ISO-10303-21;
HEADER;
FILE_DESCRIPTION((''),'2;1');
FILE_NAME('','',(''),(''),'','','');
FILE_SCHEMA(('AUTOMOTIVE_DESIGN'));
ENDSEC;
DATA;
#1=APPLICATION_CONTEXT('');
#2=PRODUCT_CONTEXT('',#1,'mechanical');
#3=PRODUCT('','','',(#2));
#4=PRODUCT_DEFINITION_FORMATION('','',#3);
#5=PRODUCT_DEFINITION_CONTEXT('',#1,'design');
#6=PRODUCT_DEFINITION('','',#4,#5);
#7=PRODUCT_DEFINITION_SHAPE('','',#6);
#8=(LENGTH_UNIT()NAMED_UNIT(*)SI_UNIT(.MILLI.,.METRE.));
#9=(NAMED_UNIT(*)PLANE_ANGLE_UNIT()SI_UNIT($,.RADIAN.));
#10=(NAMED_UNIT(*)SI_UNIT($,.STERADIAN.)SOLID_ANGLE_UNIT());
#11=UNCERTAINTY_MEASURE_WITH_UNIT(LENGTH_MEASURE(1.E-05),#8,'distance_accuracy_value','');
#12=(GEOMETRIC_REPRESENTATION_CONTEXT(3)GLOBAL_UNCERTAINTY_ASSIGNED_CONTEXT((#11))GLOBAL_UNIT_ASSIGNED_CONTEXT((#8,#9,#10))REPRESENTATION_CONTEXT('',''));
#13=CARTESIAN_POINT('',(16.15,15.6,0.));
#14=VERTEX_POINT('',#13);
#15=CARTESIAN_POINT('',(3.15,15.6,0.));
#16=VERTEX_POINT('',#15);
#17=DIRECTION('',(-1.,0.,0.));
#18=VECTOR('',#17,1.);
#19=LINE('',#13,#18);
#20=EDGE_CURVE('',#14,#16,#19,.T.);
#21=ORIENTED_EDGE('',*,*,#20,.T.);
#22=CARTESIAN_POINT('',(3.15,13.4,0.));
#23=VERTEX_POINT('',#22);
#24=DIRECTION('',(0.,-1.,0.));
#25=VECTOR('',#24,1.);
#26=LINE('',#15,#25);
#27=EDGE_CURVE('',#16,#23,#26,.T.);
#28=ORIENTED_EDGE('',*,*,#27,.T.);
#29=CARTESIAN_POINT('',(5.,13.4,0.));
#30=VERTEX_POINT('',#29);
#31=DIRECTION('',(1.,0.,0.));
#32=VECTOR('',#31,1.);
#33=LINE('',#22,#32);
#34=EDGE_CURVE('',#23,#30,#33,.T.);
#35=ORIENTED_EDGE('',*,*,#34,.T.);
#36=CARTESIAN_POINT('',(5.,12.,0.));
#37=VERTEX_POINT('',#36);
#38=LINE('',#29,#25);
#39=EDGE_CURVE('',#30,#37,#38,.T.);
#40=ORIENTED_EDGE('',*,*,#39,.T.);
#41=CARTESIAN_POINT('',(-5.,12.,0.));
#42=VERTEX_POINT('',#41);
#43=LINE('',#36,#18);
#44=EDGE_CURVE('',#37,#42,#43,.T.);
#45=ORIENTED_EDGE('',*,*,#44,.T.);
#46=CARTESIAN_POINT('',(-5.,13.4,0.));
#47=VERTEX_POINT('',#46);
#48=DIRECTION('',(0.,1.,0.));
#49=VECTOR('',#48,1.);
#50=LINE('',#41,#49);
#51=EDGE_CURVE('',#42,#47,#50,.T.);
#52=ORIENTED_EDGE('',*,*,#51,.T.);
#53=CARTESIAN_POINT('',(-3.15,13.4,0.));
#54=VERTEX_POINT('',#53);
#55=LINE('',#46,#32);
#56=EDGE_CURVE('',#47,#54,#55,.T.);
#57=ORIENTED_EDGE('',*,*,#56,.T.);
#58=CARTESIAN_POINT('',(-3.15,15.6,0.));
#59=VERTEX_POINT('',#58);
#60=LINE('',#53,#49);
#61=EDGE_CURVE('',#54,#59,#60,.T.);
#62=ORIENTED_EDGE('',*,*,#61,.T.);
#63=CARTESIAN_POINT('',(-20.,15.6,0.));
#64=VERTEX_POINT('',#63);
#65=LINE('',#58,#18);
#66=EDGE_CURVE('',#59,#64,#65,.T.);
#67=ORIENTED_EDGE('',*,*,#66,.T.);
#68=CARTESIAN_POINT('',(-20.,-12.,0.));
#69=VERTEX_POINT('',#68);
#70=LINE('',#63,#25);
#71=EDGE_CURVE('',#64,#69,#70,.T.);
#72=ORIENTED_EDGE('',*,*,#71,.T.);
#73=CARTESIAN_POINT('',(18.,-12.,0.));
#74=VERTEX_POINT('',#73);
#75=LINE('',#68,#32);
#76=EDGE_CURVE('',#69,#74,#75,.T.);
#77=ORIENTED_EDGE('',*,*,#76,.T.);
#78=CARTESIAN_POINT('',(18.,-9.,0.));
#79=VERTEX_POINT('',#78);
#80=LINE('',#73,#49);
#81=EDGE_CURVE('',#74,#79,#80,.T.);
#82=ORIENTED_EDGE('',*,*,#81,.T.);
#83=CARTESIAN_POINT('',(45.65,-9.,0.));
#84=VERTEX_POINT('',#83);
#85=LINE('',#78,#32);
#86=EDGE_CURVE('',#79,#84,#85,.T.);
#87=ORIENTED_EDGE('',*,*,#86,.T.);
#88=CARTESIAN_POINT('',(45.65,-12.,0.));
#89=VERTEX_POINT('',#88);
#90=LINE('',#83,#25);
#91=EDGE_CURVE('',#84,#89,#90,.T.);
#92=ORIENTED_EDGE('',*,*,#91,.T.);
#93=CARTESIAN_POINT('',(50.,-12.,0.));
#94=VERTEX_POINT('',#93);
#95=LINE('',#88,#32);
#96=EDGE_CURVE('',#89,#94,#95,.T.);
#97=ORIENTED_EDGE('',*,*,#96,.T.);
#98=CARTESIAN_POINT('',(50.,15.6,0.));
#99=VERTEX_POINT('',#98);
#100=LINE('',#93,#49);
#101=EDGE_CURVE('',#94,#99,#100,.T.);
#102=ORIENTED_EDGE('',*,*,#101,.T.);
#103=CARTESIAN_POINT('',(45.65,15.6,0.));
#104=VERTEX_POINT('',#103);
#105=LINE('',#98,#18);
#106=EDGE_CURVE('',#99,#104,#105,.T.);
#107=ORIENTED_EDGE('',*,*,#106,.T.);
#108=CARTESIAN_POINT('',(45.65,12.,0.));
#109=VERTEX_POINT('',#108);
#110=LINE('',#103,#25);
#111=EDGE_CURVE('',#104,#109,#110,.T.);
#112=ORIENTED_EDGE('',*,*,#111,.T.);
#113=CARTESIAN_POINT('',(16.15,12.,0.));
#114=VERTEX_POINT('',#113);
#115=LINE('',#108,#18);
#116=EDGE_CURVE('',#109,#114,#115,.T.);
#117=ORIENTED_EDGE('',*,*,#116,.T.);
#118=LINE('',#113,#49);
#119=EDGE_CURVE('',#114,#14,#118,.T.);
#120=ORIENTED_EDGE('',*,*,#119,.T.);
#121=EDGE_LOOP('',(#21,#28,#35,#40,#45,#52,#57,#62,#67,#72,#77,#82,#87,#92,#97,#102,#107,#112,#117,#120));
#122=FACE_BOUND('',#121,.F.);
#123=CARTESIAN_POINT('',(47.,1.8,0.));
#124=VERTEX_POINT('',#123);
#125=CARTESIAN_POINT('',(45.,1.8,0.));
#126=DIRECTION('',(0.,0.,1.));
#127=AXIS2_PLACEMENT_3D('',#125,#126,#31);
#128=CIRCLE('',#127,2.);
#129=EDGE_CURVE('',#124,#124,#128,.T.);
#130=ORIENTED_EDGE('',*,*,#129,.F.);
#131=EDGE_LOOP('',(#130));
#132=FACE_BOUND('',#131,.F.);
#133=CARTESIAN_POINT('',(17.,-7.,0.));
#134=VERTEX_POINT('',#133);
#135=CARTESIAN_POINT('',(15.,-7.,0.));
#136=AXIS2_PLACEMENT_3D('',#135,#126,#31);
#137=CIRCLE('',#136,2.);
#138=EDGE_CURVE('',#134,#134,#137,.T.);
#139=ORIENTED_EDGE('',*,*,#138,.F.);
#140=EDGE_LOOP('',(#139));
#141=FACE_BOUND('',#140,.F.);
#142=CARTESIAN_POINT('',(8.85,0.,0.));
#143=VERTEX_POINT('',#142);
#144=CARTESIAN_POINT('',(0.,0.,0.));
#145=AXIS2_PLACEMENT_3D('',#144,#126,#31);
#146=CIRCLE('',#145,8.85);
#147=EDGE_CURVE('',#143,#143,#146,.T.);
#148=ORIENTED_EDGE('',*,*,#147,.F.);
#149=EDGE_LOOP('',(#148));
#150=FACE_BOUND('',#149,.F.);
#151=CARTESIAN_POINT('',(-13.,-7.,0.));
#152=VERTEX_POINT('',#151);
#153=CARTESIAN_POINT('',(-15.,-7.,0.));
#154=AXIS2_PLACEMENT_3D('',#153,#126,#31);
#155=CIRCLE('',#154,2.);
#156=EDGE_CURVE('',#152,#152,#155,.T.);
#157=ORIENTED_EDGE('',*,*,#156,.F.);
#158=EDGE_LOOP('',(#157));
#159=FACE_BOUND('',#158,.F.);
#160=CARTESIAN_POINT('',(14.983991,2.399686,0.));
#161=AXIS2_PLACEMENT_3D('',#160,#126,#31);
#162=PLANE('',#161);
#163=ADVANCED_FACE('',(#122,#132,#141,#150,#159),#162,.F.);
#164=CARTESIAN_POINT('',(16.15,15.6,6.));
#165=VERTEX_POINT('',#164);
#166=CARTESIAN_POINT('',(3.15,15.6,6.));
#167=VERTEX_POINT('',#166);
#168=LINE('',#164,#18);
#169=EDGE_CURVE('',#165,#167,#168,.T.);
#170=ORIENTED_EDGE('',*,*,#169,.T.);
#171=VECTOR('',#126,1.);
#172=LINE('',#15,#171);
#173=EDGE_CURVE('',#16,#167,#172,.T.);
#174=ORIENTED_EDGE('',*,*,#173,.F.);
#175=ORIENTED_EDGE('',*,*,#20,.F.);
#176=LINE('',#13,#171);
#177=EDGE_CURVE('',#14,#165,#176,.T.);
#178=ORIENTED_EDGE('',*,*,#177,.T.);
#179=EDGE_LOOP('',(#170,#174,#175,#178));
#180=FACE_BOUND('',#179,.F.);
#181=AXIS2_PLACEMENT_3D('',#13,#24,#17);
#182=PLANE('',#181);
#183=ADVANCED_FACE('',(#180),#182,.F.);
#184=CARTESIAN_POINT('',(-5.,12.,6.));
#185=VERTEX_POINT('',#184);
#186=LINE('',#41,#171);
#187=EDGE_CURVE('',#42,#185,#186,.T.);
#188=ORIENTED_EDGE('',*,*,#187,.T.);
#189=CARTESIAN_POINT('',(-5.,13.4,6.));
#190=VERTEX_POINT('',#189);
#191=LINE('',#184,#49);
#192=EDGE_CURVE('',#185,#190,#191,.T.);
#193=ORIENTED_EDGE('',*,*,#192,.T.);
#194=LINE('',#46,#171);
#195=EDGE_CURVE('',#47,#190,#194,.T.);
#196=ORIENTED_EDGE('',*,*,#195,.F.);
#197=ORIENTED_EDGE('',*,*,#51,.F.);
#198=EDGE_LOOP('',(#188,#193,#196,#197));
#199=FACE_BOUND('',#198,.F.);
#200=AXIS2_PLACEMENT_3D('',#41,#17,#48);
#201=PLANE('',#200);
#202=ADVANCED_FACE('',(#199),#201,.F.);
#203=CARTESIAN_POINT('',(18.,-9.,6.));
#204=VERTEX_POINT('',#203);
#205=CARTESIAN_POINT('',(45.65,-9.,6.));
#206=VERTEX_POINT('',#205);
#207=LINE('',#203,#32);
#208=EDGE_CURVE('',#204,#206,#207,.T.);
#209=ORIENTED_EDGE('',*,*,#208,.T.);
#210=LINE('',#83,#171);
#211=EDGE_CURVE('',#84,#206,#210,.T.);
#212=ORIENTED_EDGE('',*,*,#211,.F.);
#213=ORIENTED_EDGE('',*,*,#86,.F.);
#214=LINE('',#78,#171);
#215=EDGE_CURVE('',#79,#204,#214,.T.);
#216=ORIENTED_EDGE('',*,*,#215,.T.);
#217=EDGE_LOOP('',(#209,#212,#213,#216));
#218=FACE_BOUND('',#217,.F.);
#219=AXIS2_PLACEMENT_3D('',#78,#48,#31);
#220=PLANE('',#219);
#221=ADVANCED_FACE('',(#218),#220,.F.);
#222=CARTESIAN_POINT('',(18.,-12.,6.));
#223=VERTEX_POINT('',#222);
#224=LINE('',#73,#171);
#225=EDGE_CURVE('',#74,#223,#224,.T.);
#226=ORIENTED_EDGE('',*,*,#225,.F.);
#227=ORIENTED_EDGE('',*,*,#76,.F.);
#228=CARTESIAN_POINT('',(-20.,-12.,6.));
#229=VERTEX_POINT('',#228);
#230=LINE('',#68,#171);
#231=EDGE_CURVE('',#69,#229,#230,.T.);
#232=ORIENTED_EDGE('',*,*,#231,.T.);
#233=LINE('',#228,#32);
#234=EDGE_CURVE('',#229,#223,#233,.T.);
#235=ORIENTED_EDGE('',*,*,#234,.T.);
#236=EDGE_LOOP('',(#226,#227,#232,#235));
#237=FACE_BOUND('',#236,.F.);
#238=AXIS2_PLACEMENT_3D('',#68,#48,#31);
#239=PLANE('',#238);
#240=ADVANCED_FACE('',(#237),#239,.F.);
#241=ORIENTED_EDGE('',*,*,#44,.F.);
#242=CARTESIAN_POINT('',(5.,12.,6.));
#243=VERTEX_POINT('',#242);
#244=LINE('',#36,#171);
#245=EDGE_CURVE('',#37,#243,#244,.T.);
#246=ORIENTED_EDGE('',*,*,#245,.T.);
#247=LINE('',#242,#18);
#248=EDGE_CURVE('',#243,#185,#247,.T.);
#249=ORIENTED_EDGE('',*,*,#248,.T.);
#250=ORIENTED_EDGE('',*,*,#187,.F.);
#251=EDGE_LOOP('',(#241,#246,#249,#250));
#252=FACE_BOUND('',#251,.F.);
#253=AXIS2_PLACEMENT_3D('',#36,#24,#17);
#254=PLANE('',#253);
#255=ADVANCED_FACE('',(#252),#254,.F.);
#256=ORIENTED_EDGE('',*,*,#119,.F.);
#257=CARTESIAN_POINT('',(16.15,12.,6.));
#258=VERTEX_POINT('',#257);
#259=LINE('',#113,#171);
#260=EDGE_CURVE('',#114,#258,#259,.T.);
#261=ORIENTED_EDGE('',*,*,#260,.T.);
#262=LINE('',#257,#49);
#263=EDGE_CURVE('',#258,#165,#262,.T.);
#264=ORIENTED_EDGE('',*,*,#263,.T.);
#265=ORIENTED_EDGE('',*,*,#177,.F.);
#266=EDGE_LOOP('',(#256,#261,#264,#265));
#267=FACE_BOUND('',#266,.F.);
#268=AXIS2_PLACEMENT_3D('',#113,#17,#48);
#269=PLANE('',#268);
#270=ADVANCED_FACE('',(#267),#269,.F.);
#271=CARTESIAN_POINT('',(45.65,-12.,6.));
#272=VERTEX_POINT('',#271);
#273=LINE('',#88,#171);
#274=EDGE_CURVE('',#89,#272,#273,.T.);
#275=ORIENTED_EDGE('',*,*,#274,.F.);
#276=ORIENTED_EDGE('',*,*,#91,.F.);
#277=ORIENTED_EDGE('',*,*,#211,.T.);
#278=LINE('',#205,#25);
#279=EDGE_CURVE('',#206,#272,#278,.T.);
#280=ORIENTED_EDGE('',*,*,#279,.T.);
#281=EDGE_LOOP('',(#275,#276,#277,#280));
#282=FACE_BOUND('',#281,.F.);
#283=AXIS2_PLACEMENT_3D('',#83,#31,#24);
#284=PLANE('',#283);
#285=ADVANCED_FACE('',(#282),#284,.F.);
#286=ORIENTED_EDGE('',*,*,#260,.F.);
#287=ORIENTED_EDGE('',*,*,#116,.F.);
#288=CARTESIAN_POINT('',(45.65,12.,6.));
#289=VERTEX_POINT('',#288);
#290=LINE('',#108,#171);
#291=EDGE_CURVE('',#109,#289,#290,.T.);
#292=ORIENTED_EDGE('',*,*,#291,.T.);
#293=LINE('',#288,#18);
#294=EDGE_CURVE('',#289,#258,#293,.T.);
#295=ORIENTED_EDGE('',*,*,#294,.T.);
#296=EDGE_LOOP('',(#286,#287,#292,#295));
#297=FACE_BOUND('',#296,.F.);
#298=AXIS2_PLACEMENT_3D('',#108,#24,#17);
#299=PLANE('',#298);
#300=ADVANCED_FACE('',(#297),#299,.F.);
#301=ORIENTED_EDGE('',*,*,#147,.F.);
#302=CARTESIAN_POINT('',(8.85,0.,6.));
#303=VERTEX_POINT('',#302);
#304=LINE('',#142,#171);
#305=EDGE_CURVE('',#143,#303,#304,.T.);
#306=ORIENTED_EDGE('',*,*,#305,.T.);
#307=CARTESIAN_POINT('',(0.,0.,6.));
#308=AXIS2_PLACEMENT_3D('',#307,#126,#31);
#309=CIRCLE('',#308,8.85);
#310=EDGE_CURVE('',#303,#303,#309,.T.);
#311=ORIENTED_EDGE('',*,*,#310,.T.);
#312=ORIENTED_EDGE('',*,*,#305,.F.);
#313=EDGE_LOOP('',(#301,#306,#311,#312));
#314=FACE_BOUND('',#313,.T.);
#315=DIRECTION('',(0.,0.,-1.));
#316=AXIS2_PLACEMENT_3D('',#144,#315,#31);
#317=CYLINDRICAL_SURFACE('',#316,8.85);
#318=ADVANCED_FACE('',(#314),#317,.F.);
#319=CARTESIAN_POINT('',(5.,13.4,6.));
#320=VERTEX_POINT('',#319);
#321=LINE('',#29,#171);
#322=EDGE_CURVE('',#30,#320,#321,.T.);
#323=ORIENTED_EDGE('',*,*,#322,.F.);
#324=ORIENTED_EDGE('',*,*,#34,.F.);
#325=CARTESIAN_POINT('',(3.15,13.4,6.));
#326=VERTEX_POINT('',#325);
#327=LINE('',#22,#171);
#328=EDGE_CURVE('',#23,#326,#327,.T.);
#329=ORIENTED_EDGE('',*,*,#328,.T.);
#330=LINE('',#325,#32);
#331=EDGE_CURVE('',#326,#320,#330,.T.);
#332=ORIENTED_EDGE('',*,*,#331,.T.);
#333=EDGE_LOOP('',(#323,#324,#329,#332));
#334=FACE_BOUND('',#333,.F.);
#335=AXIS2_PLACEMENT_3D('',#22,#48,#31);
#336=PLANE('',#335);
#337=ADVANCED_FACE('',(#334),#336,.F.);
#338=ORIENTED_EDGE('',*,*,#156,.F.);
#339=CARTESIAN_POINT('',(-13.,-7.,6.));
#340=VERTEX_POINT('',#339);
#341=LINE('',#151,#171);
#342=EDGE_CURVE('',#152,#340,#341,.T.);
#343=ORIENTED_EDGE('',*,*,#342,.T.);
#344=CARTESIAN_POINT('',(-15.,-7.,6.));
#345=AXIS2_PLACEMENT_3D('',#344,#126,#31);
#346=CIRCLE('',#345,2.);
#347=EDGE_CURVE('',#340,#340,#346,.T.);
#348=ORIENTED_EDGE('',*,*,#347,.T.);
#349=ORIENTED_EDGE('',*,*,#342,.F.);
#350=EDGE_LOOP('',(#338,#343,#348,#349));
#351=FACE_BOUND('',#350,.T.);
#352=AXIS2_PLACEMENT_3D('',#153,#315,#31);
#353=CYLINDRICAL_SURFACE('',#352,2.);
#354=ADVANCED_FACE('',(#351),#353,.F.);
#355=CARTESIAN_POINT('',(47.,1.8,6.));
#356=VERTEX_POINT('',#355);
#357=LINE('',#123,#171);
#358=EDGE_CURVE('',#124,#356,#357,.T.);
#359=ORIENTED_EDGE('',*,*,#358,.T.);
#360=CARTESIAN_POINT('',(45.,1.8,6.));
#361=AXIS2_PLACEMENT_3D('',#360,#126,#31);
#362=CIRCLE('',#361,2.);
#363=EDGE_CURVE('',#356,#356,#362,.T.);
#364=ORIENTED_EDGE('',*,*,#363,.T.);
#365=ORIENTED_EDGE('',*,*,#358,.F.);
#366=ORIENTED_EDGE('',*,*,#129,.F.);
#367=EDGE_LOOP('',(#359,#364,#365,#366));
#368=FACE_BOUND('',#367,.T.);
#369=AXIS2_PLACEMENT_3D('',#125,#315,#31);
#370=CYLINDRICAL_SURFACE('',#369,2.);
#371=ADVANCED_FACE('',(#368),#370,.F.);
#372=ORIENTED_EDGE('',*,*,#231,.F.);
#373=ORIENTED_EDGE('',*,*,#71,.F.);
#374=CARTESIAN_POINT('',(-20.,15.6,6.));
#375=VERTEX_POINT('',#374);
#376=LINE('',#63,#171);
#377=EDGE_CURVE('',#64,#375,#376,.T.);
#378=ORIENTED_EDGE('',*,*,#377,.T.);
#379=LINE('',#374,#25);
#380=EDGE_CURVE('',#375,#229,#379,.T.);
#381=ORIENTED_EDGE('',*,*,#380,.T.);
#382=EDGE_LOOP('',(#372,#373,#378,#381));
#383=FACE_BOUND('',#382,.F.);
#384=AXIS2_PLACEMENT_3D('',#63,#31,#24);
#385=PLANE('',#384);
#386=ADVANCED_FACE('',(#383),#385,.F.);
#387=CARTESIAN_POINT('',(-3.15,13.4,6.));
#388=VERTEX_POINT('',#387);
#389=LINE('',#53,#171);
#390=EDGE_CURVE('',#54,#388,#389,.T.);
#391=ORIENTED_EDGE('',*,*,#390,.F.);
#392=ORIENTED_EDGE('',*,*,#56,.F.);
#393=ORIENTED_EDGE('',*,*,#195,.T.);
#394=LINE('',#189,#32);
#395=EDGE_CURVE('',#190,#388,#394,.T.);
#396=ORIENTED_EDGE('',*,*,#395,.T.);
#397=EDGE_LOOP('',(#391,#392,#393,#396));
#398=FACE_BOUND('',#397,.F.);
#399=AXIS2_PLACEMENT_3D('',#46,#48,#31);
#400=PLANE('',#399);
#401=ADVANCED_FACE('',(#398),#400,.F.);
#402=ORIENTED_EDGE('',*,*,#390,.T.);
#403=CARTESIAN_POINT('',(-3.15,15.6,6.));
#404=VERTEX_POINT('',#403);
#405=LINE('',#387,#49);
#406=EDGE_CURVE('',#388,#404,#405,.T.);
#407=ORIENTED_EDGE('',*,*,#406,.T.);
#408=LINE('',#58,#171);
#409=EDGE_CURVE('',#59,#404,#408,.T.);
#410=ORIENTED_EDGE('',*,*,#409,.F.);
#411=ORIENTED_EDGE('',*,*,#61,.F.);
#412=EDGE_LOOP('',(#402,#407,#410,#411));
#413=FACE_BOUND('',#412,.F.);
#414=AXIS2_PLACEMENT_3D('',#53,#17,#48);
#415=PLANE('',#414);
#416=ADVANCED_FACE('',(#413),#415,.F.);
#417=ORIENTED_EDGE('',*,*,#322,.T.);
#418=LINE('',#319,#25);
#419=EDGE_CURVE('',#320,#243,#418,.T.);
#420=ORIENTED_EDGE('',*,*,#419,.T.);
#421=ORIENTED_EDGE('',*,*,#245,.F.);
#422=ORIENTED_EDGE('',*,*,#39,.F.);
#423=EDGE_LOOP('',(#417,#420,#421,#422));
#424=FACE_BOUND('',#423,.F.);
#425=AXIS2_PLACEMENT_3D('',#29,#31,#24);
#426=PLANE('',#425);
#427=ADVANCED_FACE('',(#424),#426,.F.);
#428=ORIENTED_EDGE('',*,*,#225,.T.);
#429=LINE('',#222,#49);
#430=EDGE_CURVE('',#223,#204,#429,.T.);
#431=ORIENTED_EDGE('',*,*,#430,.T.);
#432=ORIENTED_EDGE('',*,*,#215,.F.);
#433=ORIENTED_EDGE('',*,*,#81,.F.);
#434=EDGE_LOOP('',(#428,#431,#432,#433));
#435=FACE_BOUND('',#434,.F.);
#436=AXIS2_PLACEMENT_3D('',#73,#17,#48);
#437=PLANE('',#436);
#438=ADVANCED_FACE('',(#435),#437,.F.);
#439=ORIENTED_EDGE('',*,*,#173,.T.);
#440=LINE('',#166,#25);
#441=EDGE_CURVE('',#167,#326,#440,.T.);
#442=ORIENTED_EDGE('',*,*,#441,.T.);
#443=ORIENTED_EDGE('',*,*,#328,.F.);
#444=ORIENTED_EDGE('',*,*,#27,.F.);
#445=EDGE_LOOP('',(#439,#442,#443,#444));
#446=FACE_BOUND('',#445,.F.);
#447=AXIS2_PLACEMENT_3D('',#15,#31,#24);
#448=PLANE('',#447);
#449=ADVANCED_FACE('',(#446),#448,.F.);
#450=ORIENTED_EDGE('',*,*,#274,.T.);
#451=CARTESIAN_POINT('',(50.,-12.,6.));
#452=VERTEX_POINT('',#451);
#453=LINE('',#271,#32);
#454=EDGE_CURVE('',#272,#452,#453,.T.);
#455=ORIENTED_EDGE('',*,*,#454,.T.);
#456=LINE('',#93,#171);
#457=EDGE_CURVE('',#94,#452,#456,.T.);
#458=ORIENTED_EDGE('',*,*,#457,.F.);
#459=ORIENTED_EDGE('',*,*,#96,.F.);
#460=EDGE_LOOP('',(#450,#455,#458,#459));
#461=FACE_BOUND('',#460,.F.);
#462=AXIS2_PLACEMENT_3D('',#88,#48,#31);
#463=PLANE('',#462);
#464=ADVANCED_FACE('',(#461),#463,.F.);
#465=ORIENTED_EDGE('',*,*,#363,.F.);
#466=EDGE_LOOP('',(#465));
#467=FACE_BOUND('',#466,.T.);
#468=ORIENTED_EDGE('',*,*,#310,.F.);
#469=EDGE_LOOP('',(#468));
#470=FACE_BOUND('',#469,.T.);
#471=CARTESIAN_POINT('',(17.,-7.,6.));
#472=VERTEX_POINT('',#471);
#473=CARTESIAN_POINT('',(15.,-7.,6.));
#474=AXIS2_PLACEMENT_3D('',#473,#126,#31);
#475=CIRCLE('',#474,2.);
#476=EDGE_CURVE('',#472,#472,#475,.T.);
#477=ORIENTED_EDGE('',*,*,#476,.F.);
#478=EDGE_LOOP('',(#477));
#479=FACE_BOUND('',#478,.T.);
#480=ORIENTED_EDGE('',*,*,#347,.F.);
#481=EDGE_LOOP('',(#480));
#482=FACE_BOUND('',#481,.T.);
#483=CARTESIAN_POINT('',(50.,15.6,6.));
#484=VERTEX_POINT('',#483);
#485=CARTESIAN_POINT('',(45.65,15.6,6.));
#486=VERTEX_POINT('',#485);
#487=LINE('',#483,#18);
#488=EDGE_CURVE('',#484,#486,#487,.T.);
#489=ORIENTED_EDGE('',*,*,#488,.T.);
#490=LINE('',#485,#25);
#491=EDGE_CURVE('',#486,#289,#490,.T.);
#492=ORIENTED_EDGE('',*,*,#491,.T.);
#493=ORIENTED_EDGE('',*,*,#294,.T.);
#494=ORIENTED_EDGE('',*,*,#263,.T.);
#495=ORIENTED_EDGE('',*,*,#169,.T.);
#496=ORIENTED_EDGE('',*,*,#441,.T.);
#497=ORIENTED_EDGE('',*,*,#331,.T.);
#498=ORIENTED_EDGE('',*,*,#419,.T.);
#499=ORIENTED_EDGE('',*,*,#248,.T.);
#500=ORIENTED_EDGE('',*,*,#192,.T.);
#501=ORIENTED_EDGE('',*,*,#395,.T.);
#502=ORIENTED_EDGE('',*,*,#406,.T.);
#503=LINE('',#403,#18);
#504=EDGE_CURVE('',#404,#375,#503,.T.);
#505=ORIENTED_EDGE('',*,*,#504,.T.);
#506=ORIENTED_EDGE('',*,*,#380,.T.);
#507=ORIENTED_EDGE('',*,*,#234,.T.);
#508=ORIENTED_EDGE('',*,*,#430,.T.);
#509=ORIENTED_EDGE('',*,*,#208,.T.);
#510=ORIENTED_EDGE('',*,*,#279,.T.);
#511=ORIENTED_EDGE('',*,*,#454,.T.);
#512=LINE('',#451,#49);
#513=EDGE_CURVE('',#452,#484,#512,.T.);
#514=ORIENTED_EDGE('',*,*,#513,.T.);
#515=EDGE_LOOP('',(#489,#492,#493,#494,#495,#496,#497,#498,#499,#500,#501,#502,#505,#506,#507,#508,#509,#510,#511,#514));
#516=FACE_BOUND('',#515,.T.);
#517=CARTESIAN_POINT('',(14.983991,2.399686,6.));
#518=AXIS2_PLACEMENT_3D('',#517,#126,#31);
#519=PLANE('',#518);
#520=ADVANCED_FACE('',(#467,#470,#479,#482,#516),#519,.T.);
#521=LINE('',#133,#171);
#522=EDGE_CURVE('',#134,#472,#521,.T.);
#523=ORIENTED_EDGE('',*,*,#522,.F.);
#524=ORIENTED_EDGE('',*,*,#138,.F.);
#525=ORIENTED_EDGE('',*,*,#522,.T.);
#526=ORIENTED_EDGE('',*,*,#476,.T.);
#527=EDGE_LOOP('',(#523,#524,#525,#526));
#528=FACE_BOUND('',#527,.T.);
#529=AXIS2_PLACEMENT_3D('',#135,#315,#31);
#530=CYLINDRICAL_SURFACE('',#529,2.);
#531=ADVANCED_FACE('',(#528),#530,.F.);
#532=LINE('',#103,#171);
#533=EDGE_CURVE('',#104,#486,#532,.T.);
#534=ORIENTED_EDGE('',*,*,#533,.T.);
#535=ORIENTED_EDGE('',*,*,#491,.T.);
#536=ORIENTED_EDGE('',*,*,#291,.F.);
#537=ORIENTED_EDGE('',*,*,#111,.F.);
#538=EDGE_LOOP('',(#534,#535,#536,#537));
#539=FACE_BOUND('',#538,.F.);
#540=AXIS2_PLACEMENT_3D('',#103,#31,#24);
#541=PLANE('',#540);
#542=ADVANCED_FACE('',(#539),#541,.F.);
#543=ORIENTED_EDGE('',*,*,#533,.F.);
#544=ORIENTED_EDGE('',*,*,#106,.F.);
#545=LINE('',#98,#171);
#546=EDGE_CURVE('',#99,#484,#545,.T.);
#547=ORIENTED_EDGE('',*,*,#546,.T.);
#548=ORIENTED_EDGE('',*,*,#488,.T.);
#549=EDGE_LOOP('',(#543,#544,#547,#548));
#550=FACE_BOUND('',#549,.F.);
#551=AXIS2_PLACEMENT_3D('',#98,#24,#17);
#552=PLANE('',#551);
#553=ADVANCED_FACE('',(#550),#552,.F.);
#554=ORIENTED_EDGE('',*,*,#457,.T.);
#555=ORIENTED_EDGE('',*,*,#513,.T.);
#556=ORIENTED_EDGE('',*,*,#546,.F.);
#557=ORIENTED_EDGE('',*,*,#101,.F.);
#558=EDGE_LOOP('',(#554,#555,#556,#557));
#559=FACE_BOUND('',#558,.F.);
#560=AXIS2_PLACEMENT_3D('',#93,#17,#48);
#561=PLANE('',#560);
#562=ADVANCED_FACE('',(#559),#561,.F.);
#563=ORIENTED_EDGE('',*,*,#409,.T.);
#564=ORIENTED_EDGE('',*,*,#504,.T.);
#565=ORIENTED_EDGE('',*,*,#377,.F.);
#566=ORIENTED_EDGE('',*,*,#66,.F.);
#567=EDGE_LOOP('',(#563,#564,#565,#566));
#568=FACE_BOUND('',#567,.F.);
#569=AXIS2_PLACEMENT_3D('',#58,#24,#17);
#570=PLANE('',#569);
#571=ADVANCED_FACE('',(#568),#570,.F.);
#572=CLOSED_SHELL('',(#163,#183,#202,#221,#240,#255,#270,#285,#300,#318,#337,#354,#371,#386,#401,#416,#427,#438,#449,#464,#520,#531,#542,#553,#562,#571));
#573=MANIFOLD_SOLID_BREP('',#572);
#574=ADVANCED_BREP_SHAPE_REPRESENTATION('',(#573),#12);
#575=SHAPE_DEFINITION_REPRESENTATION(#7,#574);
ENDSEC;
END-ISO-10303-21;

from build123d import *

# Parameters (mm, degrees)
F0_R     = 2
F0_R_2   = 8.85
F1_DEPTH = 6


# Not quite as in the source:
# - a feature names something its author has since deleted; it is built from what else it names


with BuildPart() as f1:
    # F0 (on Top) → F1 (new body)
    with BuildSketch(Plane.XY):
        Polygon((-20, 15.6), (-20, 12), (-20, -12), (18, -12), (18, -9), (45.65, -9), (45.65, -12), (50, -12), (50, 15.6), (45.65, 15.6), (45.65, 12), (16.15, 12), (16.15, 15.6), (3.15, 15.6), (3.15, 13.4), (5, 13.4), (5, 12), (-5, 12), (-5, 13.4), (-3.15, 13.4), (-3.15, 15.6), align=None)
        with Locations((-15, -7)):
            Circle(F0_R, mode=Mode.SUBTRACT)
        Circle(F0_R_2, mode=Mode.SUBTRACT)
        with Locations((15, -7)):
            Circle(F0_R, mode=Mode.SUBTRACT)
        with Locations((45, 1.8)):
            Circle(F0_R, mode=Mode.SUBTRACT)
    extrude(amount=F1_DEPTH)


solid = f1.part
